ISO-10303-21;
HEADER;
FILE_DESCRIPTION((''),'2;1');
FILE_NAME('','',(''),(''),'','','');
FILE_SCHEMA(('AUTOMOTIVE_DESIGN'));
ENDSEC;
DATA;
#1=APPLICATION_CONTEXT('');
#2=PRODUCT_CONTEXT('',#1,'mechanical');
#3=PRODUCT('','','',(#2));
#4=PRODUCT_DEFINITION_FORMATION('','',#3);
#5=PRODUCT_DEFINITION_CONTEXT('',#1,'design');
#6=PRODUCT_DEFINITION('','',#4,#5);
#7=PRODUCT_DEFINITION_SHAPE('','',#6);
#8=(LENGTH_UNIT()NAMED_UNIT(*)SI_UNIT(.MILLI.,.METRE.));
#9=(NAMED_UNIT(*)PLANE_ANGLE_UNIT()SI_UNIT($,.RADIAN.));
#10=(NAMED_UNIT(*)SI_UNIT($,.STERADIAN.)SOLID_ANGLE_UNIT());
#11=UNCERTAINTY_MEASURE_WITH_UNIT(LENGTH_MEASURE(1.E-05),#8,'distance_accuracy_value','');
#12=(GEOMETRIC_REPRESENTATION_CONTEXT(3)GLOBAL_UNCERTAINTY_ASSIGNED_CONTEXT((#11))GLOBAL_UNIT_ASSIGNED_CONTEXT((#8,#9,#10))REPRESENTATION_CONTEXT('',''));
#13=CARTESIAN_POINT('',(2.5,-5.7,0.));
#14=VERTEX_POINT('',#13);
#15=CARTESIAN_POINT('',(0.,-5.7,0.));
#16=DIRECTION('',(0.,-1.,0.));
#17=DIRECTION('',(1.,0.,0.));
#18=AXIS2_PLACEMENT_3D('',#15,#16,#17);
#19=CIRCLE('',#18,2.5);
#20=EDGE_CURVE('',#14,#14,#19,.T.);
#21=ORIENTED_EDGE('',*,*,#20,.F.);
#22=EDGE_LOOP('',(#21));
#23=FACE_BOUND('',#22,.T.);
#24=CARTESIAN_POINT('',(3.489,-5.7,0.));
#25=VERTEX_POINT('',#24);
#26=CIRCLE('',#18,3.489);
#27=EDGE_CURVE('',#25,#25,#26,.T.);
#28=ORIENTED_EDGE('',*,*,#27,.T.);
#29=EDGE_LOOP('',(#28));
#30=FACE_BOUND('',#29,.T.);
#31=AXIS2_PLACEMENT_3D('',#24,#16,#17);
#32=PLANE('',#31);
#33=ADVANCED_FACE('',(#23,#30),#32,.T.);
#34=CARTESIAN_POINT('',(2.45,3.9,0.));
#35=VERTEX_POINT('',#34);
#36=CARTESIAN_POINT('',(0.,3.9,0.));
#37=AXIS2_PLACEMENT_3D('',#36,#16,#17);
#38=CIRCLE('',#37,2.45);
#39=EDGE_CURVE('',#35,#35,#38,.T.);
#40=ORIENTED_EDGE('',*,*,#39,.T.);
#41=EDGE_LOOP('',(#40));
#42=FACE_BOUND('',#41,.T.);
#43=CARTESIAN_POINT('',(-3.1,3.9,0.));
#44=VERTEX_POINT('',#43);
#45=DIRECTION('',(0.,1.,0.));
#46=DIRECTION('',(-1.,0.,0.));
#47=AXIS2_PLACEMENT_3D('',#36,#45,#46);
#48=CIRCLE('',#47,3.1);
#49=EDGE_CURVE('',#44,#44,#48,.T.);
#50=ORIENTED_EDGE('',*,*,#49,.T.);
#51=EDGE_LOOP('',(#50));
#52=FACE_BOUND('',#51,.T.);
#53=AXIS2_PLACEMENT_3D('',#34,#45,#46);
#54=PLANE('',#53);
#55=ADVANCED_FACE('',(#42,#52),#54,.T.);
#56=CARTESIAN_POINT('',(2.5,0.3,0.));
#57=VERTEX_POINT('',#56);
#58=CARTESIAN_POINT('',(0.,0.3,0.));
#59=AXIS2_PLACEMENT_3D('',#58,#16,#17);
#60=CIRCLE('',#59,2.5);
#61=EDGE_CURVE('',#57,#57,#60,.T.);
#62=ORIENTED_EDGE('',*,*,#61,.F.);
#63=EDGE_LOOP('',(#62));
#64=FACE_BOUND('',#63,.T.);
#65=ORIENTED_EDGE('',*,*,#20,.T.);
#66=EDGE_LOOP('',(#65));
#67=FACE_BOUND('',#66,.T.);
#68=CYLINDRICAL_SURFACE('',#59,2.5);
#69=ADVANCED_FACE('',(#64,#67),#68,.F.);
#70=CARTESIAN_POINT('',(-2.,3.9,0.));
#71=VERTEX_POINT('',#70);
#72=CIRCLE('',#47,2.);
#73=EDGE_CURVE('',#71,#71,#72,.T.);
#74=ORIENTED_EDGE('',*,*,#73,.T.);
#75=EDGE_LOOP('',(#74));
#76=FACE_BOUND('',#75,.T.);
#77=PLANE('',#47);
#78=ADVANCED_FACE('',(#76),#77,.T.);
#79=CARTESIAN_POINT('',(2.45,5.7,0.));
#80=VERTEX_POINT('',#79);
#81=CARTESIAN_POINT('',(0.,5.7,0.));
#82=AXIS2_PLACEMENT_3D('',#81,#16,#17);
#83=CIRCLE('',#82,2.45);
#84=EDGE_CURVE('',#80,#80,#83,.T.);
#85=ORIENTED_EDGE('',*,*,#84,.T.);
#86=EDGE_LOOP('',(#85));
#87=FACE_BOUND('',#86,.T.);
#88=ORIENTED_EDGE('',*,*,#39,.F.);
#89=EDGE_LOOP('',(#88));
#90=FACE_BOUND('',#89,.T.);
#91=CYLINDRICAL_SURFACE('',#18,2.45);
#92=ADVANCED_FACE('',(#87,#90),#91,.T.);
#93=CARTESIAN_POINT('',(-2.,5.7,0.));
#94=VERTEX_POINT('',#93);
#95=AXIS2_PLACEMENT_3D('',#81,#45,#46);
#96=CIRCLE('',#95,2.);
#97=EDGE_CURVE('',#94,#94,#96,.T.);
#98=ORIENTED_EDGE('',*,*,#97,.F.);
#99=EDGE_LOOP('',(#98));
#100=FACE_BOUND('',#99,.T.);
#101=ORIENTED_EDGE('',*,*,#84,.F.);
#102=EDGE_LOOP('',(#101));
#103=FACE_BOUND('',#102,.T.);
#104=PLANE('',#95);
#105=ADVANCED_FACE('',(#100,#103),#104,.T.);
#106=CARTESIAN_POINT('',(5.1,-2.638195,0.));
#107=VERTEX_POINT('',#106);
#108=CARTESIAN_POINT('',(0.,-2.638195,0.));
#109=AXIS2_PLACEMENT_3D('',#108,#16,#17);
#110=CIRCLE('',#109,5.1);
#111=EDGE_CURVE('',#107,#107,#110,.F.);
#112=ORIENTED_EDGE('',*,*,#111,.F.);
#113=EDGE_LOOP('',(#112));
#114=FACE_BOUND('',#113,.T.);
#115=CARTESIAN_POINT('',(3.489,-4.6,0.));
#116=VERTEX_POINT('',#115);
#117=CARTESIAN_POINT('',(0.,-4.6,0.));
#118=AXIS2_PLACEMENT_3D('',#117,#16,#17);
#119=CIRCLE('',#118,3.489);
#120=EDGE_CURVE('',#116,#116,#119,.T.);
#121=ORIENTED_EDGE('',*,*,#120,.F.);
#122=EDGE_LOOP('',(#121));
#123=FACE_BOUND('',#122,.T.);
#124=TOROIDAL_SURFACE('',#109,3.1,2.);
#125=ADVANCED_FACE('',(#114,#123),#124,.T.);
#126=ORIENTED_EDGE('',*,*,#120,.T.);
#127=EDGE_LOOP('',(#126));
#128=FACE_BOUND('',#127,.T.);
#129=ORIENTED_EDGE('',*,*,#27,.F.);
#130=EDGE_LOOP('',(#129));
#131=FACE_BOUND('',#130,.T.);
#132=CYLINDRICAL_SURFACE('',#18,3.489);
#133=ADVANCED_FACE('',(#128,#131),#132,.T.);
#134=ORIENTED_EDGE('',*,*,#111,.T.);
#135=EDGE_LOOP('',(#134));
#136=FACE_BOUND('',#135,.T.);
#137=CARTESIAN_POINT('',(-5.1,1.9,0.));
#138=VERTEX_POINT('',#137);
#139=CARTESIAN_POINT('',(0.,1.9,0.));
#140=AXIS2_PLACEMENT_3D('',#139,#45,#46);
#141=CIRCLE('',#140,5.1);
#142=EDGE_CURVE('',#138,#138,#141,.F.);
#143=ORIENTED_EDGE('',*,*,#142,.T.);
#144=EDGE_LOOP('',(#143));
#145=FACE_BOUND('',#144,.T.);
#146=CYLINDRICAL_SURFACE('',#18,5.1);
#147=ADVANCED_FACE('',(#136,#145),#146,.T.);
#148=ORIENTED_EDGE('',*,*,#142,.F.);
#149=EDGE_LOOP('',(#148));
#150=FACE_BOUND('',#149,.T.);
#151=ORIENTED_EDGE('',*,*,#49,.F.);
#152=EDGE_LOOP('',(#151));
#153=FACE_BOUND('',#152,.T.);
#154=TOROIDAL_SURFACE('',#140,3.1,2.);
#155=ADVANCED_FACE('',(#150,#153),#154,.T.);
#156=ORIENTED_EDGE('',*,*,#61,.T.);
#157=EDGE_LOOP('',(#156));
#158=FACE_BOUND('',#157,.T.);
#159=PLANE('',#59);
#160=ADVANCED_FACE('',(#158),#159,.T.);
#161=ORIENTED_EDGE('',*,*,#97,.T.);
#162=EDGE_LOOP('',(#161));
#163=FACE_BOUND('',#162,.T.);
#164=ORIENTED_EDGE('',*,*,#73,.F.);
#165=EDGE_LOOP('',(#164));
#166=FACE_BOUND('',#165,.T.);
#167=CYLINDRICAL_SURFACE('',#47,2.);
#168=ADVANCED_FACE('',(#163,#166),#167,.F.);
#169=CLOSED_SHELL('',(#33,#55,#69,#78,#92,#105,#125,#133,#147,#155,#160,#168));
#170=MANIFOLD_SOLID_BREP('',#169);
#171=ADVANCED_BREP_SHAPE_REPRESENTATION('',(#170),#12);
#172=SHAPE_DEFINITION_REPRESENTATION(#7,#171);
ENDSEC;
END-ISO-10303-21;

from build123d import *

# Parameters (mm, degrees)
FILLET1_R          = 2
SKETCH3_R          = 2.5
CUT_EXTRUDE1_DEPTH = 6
SKETCH4_R          = 2
CUT_EXTRUDE2_DEPTH = 1.8


with BuildPart() as part:
    # Sketch2 → Revolve2 (revolve)
    with BuildSketch(Plane.XY):
        Polygon((0, -5.7), (0, 5.7), (2.45, 5.7), (2.45, 3.9), (5.1, 3.9), (5.1, -4.6), (3.489000018, -4.6), (3.489000018, -5.7), align=None)
    revolve(axis=Axis((0, -5.7, 0), (0, 1, 0)))

    # Fillet1
    # the kernel refuses this fillet: 2 mm, written as the material it takes off along each edge
    with BuildSketch(Plane(origin=(0, -4.6, 0), x_dir=(1, 0, 0), z_dir=(0, 0, 1))) as fillet1_piece_1:
        with BuildLine():
            CenterArc((3.1, 1.961805033), FILLET1_R, 281.215517004, 78.784482996)
            Line((3.489000018, 0), (3.496780019, -0.039236101))
            ThreePointArc((3.496780019, -0.039236101), (4.294500009, -0.04), (5.1, -0.04))
            Line((5.1, -0.04), (5.14, 0))
            Line((5.14, 0), (5.14, 1.961805033))
            Line((5.14, 1.961805033), (5.1, 1.961805033))
        make_face()
    revolve(axis=Axis((0, -4.6, 0), (0, 1, 0)), mode=Mode.SUBTRACT)
    with BuildSketch(Plane(origin=(0, 3.9, 0), x_dir=(1, 0, 0), z_dir=(0, 0, 1))) as fillet1_piece_2:
        with BuildLine():
            CenterArc((5.1 - FILLET1_R, -FILLET1_R), FILLET1_R, 360, 90)
            Line((5.1, -FILLET1_R), (5.1 + FILLET1_R * 0.02, -FILLET1_R))
            Line((5.1 + FILLET1_R * 0.02, -FILLET1_R), (5.1 + FILLET1_R * 0.02, FILLET1_R * 0.02))
            Line((5.1 + FILLET1_R * 0.02, FILLET1_R * 0.02), (5.1 - FILLET1_R, FILLET1_R * 0.02))
            Line((5.1 - FILLET1_R, FILLET1_R * 0.02), (5.1 - FILLET1_R, 0))
        make_face()
    revolve(axis=Axis((0, 3.9, 0), (0, 1, 0)), mode=Mode.SUBTRACT)

    # Sketch3 → Cut-Extrude1 (cut)
    with BuildSketch(Plane.XZ.offset(5.7)):
        Circle(SKETCH3_R)
    extrude(amount=-CUT_EXTRUDE1_DEPTH, mode=Mode.SUBTRACT)

    # Sketch4 → Cut-Extrude2 (cut)
    with BuildSketch(Plane(origin=(0, 5.7, 0), x_dir=(1, 0, 0), z_dir=(0, 1, 0))):
        with Locations(Location((0, 0, 0), (0, 0, 180))):
            Circle(SKETCH4_R)
    extrude(amount=-CUT_EXTRUDE2_DEPTH, mode=Mode.SUBTRACT)


solid = part.part
